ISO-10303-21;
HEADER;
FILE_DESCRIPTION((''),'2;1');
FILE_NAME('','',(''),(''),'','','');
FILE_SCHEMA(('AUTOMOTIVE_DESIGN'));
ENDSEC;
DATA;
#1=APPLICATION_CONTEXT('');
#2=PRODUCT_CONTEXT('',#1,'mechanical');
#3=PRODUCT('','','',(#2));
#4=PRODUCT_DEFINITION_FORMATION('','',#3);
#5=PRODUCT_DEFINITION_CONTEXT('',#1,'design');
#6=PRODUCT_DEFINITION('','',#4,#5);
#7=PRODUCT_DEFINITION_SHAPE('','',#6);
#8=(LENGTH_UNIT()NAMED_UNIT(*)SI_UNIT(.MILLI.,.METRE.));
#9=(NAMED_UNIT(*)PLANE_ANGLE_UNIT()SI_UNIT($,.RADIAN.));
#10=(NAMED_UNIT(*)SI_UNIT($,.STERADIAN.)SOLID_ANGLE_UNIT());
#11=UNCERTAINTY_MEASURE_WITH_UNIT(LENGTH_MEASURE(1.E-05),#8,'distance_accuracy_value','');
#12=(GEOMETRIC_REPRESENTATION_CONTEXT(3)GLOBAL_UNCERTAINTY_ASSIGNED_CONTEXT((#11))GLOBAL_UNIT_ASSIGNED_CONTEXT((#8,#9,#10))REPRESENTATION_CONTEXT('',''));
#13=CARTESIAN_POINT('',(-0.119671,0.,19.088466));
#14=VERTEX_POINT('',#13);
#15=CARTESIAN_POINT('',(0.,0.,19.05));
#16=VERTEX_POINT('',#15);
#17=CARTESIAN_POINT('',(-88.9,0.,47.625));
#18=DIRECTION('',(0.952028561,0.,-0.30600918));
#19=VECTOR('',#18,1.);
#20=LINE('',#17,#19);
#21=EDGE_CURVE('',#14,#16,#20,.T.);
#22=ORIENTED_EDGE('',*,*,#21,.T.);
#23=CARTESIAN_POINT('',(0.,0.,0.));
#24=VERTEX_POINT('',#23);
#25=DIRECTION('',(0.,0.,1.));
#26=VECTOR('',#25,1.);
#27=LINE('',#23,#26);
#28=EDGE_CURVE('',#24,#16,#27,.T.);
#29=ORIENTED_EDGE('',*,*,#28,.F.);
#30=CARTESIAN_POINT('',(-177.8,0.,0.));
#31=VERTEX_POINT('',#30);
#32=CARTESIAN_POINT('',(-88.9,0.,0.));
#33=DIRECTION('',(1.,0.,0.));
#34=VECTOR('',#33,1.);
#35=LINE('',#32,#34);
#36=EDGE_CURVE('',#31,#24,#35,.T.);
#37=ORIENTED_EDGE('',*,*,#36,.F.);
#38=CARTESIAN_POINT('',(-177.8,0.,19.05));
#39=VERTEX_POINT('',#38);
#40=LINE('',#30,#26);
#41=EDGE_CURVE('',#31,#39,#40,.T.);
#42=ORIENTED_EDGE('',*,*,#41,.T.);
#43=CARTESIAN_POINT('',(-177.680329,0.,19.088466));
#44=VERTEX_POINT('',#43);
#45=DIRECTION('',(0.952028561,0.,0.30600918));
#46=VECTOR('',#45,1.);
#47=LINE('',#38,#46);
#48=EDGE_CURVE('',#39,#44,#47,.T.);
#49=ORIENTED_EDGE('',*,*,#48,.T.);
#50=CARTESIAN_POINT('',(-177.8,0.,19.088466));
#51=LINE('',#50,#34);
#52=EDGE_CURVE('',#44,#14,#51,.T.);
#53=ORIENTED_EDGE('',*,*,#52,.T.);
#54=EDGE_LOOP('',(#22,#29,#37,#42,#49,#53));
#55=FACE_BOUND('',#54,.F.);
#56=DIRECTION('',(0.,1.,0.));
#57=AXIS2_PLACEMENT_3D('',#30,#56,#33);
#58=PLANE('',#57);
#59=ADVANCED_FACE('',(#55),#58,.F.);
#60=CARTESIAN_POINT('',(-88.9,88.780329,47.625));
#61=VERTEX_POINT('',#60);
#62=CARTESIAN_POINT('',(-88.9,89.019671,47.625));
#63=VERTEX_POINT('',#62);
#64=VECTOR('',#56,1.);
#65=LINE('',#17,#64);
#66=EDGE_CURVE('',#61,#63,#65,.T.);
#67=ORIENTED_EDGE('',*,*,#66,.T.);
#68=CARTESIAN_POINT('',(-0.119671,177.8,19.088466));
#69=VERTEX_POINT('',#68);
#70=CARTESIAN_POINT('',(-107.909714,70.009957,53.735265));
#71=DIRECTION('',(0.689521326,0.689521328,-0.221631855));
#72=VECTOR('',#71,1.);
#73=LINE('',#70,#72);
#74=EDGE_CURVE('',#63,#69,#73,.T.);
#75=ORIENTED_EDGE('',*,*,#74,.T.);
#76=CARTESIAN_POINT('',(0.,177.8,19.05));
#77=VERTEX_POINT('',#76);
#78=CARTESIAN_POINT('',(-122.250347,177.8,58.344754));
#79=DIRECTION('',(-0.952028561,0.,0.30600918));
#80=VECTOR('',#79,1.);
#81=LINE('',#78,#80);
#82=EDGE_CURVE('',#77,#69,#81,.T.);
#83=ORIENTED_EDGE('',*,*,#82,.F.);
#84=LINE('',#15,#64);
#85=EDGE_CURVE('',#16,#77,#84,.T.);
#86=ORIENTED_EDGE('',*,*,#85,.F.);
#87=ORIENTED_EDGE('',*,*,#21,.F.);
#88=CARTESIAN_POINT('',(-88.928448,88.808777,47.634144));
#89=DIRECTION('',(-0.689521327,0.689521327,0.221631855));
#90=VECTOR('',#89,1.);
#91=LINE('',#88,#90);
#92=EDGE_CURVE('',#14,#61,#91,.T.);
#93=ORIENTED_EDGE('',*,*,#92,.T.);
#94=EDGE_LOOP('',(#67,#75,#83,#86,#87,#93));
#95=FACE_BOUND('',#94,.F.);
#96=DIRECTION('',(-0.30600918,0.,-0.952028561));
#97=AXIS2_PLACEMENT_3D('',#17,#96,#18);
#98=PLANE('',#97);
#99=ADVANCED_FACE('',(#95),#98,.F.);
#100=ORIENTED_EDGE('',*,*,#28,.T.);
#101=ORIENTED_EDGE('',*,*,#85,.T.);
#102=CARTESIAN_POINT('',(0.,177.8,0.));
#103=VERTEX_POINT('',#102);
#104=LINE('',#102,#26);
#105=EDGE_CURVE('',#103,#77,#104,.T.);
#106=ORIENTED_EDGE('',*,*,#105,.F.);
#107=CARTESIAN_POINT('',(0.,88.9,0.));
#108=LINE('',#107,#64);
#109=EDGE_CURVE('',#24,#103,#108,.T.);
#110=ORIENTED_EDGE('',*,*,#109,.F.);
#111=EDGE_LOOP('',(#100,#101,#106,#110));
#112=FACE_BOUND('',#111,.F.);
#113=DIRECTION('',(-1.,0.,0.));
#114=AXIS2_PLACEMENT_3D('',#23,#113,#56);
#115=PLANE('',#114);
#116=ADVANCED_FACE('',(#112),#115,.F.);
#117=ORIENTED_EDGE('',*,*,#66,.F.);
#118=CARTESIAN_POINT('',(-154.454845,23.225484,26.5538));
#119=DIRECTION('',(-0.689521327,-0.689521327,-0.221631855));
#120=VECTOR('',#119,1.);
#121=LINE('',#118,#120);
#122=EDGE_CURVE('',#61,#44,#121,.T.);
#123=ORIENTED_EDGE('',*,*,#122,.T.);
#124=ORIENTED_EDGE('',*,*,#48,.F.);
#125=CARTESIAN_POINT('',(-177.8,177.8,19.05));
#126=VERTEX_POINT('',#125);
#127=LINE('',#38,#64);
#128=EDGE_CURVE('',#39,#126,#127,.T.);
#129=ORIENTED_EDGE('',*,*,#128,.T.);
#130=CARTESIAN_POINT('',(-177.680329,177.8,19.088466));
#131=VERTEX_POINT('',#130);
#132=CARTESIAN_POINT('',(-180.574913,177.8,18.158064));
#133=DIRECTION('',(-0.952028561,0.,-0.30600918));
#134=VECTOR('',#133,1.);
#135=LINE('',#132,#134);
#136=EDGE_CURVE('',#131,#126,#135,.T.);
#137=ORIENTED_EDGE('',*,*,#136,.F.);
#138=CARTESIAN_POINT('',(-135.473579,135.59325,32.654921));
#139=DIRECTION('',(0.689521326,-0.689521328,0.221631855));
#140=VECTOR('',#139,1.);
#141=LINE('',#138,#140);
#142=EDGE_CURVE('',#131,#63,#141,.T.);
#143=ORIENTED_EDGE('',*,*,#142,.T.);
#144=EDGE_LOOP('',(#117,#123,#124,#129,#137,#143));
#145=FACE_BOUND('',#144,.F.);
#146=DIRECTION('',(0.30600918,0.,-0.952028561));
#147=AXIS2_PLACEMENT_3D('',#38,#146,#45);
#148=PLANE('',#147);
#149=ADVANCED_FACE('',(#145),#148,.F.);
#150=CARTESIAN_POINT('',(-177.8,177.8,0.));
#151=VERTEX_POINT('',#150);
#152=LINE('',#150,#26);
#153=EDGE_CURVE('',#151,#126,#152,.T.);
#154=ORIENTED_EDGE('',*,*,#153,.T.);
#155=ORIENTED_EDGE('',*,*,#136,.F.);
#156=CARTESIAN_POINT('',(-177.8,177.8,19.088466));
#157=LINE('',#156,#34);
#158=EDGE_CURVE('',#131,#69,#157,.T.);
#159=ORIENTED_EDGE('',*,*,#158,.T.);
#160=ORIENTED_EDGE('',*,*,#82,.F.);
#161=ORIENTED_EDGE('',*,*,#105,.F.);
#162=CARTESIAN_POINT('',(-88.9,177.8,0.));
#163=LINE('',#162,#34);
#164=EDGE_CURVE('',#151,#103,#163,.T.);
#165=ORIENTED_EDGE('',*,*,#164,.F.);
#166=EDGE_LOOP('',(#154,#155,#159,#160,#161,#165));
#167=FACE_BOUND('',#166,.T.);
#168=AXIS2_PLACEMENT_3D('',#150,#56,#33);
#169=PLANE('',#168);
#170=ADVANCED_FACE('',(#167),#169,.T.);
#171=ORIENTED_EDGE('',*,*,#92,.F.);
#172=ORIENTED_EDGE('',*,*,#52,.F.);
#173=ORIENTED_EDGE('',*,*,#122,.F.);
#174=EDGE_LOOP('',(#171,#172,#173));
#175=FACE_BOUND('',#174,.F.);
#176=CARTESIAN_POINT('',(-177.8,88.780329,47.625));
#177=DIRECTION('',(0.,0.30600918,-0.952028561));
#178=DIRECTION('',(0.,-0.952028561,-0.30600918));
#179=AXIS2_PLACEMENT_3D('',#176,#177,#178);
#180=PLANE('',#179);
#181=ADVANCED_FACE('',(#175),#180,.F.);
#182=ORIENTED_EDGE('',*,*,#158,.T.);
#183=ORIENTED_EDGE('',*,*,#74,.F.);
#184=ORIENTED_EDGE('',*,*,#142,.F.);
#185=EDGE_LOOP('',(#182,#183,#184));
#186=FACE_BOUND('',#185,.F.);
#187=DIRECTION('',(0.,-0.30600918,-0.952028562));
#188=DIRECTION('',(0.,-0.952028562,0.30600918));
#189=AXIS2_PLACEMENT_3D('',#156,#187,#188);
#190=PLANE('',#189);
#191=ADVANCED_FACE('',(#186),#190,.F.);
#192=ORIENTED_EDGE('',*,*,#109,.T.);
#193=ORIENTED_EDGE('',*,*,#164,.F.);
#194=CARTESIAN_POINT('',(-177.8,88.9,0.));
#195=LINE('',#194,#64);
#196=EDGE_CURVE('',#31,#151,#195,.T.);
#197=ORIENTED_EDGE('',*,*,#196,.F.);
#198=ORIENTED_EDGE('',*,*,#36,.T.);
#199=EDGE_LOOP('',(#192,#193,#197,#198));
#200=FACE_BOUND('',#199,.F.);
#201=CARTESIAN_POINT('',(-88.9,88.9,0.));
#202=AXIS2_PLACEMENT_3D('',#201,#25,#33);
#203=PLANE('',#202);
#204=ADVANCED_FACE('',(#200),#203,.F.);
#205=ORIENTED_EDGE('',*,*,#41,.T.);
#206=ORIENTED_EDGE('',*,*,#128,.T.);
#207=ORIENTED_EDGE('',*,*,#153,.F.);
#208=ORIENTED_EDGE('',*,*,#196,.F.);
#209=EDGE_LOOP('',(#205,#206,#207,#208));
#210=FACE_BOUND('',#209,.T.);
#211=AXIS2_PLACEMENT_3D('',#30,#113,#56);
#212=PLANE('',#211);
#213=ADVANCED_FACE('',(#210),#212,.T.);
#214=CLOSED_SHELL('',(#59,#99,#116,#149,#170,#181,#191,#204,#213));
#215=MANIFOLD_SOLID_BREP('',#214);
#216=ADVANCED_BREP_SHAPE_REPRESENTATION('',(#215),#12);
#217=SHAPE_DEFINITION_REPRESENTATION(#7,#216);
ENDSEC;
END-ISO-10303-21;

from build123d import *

# Parameters (mm, degrees)
F0_W     = 177.8
F0_H     = 177.8
F1_DEPTH = 47.625
F4_DEPTH = 177.801
F5_DEPTH = 177.801


# Not quite as in the source:
# - ends of sketch curves that miss each other by under 0.0002 mm in the source are joined


with BuildPart() as f1:
    # F0 (on Top) → F1 (new body)
    with BuildSketch(Plane.XY):
        with Locations((-88.9, 88.9)):
            Rectangle(F0_W, F0_H)
    extrude(amount=F1_DEPTH)

    # F3 (on face) → F4 (cut, through all)
    with BuildSketch(Plane(origin=(-177.8, 0, 0), x_dir=(0, -1, 0), z_dir=(-1, 0, 0))):
        Polygon((-177.8, 47.625), (-177.8, 19.0884657204), (-89.0196708441, 47.625), align=None)
        Polygon((-88.7803285837, 47.625), (2.861e-07, 19.0884657204), (0, 47.625), align=None)
    extrude(amount=-F4_DEPTH, mode=Mode.SUBTRACT)

    # F2 (on face) → F5 (cut, through all)
    with BuildSketch(Plane.XZ):
        Polygon((-177.8, 19.05), (-88.9, 47.625), (-177.8, 47.625), align=None)
        Polygon((-88.9, 47.625), (0, 19.05), (0, 47.625), align=None)
    extrude(amount=-F5_DEPTH, mode=Mode.SUBTRACT)


solid = f1.part
